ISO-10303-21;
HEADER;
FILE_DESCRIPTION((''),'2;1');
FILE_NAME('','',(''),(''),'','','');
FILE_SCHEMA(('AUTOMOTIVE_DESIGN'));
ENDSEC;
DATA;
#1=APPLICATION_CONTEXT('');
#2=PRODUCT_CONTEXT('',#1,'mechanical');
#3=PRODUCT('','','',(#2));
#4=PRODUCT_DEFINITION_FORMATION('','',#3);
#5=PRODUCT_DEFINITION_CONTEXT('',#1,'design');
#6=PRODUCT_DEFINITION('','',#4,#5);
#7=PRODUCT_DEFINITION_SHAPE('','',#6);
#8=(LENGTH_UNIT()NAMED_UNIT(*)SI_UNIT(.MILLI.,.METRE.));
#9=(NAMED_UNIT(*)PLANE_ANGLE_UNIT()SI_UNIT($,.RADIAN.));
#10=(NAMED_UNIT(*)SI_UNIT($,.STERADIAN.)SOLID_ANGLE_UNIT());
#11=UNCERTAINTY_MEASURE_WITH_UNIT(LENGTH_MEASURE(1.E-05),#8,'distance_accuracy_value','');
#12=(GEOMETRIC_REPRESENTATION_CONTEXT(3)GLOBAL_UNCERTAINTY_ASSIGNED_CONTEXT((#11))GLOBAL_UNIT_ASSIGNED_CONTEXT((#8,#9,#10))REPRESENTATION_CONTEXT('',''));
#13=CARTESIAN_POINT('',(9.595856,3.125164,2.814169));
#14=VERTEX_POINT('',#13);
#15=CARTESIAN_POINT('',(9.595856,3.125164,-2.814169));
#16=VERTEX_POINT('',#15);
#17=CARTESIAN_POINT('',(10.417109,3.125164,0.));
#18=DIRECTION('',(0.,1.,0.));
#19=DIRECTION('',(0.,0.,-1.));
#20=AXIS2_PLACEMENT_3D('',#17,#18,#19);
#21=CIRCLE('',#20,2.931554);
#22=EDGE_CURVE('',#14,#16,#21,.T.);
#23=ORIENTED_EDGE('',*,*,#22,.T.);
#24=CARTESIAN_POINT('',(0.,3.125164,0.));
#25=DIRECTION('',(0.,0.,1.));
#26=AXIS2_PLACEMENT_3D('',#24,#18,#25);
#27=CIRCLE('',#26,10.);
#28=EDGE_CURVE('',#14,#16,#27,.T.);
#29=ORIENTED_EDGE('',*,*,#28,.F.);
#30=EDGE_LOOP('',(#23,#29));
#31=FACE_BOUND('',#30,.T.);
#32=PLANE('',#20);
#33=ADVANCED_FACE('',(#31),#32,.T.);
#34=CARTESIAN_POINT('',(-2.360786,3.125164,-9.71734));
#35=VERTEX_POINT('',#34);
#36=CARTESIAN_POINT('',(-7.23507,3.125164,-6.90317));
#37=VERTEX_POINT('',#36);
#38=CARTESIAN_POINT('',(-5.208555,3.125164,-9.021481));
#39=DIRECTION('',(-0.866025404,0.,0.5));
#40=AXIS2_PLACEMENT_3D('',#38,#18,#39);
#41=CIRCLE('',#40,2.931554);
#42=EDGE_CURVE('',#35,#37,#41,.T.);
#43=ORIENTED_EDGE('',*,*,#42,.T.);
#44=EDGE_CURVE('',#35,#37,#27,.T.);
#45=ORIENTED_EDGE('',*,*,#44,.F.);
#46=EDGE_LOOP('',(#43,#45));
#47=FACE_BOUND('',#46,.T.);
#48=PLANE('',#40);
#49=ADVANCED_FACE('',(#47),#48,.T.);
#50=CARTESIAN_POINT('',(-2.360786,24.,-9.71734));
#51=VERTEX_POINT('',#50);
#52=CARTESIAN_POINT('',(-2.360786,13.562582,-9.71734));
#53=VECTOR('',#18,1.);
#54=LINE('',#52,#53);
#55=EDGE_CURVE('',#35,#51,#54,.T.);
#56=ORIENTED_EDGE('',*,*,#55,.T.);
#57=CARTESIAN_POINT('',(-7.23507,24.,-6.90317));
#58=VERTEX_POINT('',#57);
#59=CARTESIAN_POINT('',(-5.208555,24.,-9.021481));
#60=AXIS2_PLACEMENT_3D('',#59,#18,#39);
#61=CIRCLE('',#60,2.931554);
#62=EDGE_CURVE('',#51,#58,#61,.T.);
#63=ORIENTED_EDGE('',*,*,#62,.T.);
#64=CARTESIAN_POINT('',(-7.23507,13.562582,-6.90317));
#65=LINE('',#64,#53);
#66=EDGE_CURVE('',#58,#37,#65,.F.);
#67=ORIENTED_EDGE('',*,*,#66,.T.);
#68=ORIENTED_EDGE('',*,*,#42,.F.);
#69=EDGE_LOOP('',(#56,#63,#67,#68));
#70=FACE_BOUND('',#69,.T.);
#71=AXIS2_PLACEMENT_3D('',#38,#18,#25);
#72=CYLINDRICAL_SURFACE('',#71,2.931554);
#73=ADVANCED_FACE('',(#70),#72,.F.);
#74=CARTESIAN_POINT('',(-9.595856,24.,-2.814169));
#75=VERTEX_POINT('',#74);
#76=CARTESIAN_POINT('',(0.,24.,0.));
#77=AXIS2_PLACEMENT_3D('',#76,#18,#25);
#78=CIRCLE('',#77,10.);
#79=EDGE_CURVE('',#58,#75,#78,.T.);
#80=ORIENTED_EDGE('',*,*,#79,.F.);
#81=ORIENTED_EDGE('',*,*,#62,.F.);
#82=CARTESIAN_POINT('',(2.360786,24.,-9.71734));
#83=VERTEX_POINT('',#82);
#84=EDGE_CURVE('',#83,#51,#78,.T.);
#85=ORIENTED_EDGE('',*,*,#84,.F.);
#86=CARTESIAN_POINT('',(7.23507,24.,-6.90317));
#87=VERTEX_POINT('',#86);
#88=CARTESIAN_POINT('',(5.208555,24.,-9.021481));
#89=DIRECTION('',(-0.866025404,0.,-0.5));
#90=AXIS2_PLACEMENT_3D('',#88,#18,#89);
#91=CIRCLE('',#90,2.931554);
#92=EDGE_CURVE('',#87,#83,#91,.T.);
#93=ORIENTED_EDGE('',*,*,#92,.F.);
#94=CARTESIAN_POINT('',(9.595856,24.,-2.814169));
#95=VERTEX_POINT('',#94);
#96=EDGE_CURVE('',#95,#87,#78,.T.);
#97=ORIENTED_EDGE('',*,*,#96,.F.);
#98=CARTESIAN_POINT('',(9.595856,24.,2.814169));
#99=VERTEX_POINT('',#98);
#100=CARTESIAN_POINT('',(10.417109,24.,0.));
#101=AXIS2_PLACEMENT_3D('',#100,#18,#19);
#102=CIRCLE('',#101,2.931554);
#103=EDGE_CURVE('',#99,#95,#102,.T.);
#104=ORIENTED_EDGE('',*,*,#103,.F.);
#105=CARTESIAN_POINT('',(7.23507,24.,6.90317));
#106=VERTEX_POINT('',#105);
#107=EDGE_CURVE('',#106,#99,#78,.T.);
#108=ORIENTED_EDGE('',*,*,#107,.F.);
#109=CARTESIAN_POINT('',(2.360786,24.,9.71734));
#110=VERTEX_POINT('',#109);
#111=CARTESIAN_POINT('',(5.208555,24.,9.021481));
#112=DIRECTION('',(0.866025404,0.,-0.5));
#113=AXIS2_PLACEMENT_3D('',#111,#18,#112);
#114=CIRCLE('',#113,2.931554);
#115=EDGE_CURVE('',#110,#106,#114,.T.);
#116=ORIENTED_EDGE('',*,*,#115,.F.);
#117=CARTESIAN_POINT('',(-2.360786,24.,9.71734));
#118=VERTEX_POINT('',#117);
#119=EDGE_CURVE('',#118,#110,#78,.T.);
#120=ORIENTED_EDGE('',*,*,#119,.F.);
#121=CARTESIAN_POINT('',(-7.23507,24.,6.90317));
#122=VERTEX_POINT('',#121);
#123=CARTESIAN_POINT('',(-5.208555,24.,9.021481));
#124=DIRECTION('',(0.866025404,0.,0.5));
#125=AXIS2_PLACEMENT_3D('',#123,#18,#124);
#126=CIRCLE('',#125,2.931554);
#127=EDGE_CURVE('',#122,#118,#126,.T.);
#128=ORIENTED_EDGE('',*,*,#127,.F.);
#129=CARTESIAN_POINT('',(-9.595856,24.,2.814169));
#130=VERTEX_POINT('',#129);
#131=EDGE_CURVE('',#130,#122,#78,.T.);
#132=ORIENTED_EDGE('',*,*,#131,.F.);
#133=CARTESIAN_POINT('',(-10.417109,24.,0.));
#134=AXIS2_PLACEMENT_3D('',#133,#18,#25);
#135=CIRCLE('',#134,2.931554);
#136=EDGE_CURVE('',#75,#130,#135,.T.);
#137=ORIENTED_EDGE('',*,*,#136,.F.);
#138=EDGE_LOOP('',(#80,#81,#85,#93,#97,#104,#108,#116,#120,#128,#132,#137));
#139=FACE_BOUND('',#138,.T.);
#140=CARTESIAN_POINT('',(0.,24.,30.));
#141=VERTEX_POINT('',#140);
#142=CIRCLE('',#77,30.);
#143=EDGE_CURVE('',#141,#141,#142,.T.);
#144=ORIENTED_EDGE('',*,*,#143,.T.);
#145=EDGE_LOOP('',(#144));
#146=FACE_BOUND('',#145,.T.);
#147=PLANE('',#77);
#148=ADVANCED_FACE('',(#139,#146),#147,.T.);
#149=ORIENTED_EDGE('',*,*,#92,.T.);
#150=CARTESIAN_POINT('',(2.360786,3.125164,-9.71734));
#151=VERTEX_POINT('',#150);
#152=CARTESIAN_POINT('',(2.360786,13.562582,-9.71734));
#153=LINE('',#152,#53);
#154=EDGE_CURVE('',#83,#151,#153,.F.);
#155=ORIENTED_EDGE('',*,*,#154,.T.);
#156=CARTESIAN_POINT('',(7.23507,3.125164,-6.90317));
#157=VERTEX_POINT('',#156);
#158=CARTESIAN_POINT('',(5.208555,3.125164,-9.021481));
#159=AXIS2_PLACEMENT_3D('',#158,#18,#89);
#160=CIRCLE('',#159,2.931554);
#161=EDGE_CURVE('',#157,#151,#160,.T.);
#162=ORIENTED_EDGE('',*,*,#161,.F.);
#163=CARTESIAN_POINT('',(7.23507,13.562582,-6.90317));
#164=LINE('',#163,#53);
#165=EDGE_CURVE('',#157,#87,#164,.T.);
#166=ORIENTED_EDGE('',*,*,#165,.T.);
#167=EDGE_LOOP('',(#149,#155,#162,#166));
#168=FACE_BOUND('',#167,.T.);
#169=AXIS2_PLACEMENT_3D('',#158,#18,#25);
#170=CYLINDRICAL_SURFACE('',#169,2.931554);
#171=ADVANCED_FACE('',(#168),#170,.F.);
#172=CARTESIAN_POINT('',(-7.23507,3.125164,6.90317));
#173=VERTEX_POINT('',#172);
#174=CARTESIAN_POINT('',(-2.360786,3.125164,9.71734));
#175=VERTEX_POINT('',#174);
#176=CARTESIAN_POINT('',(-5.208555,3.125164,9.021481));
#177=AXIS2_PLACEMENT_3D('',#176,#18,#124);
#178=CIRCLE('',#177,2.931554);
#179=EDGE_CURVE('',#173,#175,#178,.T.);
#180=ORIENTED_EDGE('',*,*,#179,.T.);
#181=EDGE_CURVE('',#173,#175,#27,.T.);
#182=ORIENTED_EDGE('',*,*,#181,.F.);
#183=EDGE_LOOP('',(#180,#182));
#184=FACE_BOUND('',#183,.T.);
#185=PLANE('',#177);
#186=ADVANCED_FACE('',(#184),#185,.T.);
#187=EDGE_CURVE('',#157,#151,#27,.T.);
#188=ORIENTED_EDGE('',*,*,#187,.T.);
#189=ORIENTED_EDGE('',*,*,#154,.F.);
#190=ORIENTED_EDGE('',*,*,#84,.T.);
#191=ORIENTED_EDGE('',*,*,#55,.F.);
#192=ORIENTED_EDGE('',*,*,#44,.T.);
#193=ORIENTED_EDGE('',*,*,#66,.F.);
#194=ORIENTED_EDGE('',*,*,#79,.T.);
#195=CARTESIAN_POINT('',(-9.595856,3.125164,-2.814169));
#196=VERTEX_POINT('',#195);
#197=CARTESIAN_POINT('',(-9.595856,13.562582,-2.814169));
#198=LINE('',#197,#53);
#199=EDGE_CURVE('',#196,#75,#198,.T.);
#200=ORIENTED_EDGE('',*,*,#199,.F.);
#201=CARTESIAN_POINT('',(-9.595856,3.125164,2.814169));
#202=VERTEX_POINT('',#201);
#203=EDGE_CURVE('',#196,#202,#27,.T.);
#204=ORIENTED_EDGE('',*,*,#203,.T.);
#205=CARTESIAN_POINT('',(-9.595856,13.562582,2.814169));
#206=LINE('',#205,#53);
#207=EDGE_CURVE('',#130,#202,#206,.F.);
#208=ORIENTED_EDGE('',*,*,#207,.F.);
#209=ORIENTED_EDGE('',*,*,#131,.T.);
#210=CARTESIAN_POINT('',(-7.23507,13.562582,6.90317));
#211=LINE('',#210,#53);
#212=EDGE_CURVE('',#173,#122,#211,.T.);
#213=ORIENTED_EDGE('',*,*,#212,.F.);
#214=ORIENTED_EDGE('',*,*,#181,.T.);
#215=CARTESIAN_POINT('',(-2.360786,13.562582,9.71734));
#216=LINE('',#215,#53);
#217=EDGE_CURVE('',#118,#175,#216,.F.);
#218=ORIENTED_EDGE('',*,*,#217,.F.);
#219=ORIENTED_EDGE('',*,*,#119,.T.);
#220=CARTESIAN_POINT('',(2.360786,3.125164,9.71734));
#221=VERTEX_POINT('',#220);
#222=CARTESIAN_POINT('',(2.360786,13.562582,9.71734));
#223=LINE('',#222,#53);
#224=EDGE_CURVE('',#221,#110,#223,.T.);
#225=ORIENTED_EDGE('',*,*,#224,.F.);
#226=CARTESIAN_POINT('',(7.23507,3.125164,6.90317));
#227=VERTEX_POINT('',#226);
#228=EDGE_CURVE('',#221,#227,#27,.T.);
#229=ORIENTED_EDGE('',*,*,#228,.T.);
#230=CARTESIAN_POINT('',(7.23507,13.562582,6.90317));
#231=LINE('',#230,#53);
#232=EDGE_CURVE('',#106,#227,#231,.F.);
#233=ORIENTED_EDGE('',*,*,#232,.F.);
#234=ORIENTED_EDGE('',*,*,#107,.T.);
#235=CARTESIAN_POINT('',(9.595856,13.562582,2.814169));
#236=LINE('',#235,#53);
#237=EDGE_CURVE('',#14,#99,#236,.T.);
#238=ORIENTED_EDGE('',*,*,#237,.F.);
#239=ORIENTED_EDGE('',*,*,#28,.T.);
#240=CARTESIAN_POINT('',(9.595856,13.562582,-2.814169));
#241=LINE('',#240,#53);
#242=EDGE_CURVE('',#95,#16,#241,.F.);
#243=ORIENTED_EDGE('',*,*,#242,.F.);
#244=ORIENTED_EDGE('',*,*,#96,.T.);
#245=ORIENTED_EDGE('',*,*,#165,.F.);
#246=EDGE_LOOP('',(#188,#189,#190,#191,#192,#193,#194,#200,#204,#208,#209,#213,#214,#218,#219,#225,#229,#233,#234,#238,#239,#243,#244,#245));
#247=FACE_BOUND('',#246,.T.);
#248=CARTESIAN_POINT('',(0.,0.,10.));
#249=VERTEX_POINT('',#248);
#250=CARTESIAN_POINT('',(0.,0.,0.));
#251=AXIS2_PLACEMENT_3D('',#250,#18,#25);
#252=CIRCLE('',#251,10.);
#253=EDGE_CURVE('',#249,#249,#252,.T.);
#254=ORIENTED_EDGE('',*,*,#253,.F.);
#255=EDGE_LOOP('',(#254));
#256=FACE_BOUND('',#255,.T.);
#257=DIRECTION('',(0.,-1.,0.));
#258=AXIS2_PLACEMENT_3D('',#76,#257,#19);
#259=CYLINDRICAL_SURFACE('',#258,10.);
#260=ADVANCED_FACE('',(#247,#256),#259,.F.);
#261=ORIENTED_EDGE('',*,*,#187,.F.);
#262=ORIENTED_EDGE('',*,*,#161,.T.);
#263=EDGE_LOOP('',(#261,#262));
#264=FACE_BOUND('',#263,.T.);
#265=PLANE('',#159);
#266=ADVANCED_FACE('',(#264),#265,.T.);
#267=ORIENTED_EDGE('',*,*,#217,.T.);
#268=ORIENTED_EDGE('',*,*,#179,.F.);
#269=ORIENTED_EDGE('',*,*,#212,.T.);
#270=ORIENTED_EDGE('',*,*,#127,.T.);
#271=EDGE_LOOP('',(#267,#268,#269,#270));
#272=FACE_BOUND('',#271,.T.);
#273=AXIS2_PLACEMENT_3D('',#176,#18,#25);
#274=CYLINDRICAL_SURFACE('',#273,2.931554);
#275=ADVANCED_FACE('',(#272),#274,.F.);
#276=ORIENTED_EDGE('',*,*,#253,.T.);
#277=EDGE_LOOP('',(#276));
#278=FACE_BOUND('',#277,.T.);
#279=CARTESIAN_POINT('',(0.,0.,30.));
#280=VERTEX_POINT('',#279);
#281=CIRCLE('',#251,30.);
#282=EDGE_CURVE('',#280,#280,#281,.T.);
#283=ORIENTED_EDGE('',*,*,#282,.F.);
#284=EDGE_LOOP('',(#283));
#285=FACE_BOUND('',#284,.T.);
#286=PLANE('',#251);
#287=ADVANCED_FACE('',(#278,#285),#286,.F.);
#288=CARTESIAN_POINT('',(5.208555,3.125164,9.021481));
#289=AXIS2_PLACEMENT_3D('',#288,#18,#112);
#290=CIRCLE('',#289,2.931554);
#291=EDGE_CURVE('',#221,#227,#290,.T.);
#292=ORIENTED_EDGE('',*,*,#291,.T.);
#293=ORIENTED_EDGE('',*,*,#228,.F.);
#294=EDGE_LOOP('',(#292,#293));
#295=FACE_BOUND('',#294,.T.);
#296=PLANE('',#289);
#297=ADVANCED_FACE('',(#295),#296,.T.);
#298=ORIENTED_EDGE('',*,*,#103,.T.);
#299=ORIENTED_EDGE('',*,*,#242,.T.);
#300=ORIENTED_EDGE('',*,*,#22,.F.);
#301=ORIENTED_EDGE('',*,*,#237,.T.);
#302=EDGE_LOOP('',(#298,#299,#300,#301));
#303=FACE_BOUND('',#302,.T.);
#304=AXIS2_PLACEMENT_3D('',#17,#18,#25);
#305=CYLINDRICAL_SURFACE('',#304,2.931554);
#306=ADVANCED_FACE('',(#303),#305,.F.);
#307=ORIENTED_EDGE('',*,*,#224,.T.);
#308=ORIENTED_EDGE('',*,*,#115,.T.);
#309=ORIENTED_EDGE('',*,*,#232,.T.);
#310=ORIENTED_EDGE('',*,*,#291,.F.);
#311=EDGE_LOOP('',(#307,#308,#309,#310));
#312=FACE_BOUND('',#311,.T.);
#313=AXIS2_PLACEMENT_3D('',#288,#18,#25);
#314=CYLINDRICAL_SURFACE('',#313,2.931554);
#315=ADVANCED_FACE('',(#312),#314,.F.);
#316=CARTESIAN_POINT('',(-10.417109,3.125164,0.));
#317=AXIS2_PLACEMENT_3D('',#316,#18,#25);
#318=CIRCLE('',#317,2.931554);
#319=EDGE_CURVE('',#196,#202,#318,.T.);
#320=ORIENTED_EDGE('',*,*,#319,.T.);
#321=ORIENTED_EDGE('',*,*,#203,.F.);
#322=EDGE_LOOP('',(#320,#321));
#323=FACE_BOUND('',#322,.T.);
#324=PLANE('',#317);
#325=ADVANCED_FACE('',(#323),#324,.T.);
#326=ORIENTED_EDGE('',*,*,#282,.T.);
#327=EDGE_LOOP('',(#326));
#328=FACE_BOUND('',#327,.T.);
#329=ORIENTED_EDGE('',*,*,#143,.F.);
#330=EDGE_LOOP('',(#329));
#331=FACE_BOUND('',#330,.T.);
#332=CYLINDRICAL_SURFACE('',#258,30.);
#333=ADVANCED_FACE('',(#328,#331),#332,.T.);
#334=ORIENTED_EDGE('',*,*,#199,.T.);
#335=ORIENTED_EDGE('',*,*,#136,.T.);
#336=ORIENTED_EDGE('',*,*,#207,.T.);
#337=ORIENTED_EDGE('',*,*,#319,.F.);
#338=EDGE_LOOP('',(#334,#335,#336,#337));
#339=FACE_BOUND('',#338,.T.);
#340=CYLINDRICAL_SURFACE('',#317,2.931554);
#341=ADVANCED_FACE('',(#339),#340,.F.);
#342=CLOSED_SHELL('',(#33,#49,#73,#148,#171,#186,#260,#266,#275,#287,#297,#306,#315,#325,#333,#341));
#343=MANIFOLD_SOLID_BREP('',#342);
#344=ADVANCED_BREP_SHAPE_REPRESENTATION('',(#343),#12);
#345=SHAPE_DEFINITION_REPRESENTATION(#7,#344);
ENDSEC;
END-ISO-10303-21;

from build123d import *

# Parameters (mm, degrees)
SKETCH1_R           = 30
BOSS_EXTRUDE1_DEPTH = 24
SKETCH2_R           = 10
CUT_EXTRUDE1_DEPTH  = 49.744230428
SKETCH3_R           = 2.931553515
CUT_EXTRUDE2_DEPTH  = 20.87483626
CIRPATTERN1_COUNT   = 6


with BuildPart() as part:
    # Sketch1 → Boss-Extrude1 (new body)
    with BuildSketch(Plane(origin=(0, 0, 0), x_dir=(1, 0, 0), z_dir=(0, 1, 0))):
        Circle(SKETCH1_R)
    extrude(amount=BOSS_EXTRUDE1_DEPTH)

    # Sketch2 → Cut-Extrude1 (cut, through all)
    with BuildSketch(Plane(origin=(0, 0, 0), x_dir=(1, 0, 0), z_dir=(0, 1, 0))):
        Circle(SKETCH2_R)
    extrude(amount=CUT_EXTRUDE1_DEPTH, mode=Mode.SUBTRACT)

    # Sketch3 → Cut-Extrude2 (cut)
    with BuildSketch(Plane(origin=(0, 24, 0), x_dir=(1, 0, 0), z_dir=(0, 1, 0))):
        with Locations((-10.417109361, 0)):
            Circle(SKETCH3_R)
    cut_extrude2 = extrude(amount=-CUT_EXTRUDE2_DEPTH, mode=Mode.SUBTRACT)

    # CirPattern1: Cut-Extrude2 ×6 about axis
    cirpattern1_axis = Axis((0, 0, 0), (0, 1, 0))
    for i in range(1, CIRPATTERN1_COUNT):
        add(cut_extrude2.rotate(cirpattern1_axis, i * 360 / CIRPATTERN1_COUNT), mode=Mode.SUBTRACT)


solid = part.part
